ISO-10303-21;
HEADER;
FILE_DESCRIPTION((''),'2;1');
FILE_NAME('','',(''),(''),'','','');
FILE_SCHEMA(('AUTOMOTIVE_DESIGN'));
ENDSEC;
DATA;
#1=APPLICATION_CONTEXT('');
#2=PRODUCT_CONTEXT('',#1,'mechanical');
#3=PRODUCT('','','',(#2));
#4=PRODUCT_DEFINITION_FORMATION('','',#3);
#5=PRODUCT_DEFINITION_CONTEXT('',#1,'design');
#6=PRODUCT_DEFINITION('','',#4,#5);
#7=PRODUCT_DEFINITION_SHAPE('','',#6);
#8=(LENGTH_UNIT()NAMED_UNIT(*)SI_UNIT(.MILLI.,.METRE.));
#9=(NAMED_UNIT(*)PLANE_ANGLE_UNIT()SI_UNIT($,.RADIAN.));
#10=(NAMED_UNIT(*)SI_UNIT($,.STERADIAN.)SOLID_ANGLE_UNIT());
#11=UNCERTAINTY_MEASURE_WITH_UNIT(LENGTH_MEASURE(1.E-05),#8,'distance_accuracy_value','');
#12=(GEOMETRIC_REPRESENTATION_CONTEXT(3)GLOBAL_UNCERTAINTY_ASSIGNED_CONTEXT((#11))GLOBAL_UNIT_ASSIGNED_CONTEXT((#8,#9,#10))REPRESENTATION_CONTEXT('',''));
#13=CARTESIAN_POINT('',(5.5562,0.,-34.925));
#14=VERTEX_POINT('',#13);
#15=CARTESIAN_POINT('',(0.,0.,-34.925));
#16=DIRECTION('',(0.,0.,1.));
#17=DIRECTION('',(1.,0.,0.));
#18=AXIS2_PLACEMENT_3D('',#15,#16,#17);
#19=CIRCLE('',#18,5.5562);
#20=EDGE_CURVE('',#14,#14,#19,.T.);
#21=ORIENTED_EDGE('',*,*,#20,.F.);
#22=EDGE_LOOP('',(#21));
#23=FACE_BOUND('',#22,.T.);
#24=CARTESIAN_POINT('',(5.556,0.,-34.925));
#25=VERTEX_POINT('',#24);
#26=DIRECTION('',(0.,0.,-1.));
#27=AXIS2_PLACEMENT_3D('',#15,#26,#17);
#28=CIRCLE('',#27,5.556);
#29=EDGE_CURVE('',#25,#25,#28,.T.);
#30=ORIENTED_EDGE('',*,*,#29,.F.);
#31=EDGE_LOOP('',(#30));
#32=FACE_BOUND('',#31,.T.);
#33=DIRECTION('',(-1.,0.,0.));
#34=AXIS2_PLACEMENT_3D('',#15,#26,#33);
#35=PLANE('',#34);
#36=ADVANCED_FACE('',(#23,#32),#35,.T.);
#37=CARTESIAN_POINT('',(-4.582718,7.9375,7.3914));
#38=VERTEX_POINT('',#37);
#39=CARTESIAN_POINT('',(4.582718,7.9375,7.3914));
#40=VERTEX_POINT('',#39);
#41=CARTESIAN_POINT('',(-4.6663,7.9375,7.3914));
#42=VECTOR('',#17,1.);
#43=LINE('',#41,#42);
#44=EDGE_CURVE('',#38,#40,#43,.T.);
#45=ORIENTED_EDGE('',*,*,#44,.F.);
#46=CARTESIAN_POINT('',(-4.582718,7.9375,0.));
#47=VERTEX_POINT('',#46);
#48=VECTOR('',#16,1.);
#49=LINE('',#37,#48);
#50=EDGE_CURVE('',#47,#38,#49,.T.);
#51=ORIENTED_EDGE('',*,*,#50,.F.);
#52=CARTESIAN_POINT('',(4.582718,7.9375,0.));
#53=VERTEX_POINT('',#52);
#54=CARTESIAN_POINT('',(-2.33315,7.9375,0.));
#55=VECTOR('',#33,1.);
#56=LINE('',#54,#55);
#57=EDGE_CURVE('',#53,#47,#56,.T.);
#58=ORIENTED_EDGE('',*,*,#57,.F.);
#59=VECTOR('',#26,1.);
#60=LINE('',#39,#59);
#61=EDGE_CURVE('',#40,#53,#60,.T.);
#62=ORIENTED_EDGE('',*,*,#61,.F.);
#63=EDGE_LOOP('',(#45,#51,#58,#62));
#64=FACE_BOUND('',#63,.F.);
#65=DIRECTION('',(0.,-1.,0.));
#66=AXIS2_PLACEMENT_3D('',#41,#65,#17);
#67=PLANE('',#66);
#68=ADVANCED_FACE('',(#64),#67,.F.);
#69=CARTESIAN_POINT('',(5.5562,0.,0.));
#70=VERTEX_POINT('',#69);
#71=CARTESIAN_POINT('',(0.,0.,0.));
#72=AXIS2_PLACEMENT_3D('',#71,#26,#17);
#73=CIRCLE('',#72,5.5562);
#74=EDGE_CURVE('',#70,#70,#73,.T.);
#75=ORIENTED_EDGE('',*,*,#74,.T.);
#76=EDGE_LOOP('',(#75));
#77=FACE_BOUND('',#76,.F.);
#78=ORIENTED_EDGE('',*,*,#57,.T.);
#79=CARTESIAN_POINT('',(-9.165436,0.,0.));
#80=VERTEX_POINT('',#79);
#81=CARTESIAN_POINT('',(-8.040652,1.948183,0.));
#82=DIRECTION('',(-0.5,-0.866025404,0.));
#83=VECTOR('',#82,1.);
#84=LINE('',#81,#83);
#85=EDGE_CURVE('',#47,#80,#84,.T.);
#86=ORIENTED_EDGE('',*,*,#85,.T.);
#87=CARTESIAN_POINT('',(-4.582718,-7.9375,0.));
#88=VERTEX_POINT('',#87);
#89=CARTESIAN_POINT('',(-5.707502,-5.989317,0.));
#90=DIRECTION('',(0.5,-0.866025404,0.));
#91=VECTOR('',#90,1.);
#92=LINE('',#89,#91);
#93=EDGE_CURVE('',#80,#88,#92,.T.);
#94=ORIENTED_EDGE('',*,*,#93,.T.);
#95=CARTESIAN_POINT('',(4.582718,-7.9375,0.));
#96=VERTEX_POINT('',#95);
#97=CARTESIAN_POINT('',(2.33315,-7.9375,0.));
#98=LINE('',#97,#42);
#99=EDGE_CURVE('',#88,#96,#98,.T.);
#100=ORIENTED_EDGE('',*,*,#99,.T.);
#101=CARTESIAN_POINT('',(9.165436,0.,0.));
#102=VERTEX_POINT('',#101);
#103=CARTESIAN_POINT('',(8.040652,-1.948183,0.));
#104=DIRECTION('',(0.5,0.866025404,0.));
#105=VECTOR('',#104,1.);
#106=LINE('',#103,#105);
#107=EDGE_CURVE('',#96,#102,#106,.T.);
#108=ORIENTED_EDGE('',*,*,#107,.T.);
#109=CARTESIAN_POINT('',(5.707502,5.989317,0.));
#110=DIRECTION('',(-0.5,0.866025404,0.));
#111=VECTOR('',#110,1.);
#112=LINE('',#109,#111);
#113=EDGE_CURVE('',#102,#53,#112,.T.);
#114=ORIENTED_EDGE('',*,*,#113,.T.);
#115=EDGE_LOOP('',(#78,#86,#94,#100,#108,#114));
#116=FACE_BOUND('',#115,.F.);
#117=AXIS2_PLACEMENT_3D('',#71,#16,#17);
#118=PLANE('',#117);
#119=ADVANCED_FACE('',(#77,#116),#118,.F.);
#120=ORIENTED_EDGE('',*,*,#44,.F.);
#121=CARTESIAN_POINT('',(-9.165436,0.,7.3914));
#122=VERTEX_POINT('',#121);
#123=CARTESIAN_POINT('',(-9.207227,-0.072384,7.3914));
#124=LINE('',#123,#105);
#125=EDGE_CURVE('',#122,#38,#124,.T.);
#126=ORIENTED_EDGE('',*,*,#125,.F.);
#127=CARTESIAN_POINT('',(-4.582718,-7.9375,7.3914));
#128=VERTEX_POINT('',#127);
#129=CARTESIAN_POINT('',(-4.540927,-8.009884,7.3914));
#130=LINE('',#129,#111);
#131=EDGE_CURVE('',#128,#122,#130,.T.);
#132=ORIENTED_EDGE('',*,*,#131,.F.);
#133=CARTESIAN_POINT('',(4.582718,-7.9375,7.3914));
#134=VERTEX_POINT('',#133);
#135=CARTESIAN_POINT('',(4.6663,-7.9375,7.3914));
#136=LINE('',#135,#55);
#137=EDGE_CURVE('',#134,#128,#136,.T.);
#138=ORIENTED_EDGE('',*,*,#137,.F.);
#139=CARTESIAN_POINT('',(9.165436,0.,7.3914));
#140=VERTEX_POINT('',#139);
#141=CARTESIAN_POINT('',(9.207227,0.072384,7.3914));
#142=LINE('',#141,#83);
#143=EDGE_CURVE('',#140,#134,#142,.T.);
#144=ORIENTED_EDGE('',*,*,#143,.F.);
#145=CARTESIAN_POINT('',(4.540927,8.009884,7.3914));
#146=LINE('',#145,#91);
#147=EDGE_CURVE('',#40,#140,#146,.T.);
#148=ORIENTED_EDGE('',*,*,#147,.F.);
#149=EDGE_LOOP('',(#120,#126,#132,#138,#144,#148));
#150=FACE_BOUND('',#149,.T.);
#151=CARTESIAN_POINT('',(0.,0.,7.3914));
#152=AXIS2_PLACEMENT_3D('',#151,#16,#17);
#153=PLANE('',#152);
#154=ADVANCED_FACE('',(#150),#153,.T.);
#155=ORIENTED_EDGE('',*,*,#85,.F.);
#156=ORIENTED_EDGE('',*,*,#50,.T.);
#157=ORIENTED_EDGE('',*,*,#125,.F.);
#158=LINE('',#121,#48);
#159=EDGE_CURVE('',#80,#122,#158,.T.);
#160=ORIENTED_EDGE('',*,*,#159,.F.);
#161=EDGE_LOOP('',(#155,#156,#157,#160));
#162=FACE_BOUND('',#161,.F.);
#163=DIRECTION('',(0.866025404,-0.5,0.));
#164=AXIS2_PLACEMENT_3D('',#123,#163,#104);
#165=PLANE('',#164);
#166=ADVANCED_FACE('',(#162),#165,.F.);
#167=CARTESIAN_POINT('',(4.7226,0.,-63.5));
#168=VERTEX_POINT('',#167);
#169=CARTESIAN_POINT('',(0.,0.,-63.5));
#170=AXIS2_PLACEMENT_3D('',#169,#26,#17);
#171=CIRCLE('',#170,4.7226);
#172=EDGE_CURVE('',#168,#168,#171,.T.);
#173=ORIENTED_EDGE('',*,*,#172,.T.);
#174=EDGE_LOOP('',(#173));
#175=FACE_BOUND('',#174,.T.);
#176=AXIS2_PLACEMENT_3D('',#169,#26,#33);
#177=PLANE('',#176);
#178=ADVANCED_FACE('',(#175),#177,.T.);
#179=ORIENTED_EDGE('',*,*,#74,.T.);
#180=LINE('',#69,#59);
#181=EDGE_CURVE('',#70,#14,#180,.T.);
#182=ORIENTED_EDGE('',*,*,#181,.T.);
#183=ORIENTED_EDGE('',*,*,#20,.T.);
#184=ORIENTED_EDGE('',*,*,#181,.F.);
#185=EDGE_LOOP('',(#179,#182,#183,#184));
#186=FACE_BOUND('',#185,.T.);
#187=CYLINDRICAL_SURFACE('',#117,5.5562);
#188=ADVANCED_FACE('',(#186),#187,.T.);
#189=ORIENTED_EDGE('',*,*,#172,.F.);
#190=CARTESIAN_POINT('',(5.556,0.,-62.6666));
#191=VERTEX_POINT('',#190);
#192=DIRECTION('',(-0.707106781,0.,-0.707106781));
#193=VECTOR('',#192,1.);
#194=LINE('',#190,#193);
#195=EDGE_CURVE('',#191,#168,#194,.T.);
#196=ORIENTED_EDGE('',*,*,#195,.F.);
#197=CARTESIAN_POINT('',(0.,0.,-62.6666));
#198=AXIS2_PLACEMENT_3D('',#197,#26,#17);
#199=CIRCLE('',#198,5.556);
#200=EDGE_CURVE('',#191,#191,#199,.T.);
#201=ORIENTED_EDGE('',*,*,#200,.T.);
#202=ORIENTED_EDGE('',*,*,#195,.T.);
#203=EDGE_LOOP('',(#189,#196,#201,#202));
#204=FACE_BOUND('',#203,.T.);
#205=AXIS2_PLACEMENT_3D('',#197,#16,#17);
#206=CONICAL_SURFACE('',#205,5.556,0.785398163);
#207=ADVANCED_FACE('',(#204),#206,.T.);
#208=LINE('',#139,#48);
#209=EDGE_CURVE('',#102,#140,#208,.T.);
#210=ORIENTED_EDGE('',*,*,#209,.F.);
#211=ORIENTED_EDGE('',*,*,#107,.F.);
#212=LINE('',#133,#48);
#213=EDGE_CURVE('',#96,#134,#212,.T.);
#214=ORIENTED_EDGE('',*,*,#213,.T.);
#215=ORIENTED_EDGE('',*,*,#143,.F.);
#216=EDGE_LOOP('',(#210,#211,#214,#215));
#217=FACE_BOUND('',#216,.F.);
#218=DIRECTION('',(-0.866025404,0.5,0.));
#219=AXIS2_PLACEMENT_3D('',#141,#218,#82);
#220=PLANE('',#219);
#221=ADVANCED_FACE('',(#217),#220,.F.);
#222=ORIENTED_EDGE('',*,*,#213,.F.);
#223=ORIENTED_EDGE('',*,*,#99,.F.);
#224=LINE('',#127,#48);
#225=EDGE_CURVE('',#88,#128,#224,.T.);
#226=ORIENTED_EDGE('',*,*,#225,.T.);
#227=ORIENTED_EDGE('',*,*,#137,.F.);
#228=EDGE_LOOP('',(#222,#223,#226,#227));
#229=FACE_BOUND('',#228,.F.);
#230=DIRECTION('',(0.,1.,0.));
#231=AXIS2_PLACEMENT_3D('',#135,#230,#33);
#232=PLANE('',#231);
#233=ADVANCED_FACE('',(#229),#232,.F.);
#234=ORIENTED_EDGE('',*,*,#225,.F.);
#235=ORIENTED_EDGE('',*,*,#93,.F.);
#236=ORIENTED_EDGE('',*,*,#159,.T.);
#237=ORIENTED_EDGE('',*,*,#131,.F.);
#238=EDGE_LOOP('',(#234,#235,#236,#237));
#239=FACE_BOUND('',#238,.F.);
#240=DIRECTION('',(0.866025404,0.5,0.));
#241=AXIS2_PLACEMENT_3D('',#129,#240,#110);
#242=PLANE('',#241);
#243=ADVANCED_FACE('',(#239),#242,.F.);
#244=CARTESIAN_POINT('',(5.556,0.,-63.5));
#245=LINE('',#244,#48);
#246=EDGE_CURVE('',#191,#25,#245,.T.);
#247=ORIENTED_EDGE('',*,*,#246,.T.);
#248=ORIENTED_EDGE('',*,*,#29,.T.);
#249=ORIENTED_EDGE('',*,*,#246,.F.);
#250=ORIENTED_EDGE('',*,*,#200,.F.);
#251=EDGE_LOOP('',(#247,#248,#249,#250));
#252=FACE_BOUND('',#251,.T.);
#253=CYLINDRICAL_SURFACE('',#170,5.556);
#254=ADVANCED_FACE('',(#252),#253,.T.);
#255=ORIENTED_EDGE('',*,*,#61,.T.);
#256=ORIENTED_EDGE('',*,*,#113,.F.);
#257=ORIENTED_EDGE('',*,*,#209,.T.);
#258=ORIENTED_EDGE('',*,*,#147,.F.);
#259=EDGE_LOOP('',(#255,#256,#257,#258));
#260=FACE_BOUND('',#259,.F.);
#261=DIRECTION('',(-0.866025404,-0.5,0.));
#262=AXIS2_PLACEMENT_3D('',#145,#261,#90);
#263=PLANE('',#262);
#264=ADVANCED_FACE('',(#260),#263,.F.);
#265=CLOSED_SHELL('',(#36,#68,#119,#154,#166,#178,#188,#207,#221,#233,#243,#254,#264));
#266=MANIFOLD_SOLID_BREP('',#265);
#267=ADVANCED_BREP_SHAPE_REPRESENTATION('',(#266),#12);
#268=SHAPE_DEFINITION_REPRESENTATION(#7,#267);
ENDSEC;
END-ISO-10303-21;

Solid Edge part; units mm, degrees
sketch "Sketch1" plane through (0, 0, 0) normal (0, 0, 1) x (1, 0, 0)
  circle A0 centre (0, 0) radius 9.2075
  dimension "D1" = 18.415
extrude "Protrusion1" add sketch "Sketch1" along normal blind 7.3914
sketch "Sketch2" plane through (0, 0, 0) normal (0, 0, -1) x (1, 0, 0)
  circle A0 centre (0, 0) radius 5.5562
extrude "Protrusion2" add sketch "Sketch2" along normal blind 63.5
sketch "Sketch3" plane through (0, 0, -63.5) normal (0, 0, -1) x (1, 0, 0)
  circle A0 centre (0, 0) radius 5.556
extrude "Cutout1" cut sketch "Sketch3" against normal blind 28.575 flip side to cut
chamfer "Chamfer_1" distance 0.8334 angle 45 1 edges at (-5.556, 0, -63.5)
sketch "Sketch4" plane through (0, 0, 7.3914) normal (0, 0, 1) x (1, 0, 0)
  line L0 (-4.6663, 7.9375) -> (4.6663, 7.9375)
  dimension "D1" = 15.875
extrude "Cutout2" cut sketch "Sketch4" against normal up to next material side at (0, 7.9875, 7.3914)
pattern_circular "Pattern1" count 6 over 360 about axis through (0, 0, 7.3914) along (0, 0, 1) of "Cutout2"
properties part number "24100025"
